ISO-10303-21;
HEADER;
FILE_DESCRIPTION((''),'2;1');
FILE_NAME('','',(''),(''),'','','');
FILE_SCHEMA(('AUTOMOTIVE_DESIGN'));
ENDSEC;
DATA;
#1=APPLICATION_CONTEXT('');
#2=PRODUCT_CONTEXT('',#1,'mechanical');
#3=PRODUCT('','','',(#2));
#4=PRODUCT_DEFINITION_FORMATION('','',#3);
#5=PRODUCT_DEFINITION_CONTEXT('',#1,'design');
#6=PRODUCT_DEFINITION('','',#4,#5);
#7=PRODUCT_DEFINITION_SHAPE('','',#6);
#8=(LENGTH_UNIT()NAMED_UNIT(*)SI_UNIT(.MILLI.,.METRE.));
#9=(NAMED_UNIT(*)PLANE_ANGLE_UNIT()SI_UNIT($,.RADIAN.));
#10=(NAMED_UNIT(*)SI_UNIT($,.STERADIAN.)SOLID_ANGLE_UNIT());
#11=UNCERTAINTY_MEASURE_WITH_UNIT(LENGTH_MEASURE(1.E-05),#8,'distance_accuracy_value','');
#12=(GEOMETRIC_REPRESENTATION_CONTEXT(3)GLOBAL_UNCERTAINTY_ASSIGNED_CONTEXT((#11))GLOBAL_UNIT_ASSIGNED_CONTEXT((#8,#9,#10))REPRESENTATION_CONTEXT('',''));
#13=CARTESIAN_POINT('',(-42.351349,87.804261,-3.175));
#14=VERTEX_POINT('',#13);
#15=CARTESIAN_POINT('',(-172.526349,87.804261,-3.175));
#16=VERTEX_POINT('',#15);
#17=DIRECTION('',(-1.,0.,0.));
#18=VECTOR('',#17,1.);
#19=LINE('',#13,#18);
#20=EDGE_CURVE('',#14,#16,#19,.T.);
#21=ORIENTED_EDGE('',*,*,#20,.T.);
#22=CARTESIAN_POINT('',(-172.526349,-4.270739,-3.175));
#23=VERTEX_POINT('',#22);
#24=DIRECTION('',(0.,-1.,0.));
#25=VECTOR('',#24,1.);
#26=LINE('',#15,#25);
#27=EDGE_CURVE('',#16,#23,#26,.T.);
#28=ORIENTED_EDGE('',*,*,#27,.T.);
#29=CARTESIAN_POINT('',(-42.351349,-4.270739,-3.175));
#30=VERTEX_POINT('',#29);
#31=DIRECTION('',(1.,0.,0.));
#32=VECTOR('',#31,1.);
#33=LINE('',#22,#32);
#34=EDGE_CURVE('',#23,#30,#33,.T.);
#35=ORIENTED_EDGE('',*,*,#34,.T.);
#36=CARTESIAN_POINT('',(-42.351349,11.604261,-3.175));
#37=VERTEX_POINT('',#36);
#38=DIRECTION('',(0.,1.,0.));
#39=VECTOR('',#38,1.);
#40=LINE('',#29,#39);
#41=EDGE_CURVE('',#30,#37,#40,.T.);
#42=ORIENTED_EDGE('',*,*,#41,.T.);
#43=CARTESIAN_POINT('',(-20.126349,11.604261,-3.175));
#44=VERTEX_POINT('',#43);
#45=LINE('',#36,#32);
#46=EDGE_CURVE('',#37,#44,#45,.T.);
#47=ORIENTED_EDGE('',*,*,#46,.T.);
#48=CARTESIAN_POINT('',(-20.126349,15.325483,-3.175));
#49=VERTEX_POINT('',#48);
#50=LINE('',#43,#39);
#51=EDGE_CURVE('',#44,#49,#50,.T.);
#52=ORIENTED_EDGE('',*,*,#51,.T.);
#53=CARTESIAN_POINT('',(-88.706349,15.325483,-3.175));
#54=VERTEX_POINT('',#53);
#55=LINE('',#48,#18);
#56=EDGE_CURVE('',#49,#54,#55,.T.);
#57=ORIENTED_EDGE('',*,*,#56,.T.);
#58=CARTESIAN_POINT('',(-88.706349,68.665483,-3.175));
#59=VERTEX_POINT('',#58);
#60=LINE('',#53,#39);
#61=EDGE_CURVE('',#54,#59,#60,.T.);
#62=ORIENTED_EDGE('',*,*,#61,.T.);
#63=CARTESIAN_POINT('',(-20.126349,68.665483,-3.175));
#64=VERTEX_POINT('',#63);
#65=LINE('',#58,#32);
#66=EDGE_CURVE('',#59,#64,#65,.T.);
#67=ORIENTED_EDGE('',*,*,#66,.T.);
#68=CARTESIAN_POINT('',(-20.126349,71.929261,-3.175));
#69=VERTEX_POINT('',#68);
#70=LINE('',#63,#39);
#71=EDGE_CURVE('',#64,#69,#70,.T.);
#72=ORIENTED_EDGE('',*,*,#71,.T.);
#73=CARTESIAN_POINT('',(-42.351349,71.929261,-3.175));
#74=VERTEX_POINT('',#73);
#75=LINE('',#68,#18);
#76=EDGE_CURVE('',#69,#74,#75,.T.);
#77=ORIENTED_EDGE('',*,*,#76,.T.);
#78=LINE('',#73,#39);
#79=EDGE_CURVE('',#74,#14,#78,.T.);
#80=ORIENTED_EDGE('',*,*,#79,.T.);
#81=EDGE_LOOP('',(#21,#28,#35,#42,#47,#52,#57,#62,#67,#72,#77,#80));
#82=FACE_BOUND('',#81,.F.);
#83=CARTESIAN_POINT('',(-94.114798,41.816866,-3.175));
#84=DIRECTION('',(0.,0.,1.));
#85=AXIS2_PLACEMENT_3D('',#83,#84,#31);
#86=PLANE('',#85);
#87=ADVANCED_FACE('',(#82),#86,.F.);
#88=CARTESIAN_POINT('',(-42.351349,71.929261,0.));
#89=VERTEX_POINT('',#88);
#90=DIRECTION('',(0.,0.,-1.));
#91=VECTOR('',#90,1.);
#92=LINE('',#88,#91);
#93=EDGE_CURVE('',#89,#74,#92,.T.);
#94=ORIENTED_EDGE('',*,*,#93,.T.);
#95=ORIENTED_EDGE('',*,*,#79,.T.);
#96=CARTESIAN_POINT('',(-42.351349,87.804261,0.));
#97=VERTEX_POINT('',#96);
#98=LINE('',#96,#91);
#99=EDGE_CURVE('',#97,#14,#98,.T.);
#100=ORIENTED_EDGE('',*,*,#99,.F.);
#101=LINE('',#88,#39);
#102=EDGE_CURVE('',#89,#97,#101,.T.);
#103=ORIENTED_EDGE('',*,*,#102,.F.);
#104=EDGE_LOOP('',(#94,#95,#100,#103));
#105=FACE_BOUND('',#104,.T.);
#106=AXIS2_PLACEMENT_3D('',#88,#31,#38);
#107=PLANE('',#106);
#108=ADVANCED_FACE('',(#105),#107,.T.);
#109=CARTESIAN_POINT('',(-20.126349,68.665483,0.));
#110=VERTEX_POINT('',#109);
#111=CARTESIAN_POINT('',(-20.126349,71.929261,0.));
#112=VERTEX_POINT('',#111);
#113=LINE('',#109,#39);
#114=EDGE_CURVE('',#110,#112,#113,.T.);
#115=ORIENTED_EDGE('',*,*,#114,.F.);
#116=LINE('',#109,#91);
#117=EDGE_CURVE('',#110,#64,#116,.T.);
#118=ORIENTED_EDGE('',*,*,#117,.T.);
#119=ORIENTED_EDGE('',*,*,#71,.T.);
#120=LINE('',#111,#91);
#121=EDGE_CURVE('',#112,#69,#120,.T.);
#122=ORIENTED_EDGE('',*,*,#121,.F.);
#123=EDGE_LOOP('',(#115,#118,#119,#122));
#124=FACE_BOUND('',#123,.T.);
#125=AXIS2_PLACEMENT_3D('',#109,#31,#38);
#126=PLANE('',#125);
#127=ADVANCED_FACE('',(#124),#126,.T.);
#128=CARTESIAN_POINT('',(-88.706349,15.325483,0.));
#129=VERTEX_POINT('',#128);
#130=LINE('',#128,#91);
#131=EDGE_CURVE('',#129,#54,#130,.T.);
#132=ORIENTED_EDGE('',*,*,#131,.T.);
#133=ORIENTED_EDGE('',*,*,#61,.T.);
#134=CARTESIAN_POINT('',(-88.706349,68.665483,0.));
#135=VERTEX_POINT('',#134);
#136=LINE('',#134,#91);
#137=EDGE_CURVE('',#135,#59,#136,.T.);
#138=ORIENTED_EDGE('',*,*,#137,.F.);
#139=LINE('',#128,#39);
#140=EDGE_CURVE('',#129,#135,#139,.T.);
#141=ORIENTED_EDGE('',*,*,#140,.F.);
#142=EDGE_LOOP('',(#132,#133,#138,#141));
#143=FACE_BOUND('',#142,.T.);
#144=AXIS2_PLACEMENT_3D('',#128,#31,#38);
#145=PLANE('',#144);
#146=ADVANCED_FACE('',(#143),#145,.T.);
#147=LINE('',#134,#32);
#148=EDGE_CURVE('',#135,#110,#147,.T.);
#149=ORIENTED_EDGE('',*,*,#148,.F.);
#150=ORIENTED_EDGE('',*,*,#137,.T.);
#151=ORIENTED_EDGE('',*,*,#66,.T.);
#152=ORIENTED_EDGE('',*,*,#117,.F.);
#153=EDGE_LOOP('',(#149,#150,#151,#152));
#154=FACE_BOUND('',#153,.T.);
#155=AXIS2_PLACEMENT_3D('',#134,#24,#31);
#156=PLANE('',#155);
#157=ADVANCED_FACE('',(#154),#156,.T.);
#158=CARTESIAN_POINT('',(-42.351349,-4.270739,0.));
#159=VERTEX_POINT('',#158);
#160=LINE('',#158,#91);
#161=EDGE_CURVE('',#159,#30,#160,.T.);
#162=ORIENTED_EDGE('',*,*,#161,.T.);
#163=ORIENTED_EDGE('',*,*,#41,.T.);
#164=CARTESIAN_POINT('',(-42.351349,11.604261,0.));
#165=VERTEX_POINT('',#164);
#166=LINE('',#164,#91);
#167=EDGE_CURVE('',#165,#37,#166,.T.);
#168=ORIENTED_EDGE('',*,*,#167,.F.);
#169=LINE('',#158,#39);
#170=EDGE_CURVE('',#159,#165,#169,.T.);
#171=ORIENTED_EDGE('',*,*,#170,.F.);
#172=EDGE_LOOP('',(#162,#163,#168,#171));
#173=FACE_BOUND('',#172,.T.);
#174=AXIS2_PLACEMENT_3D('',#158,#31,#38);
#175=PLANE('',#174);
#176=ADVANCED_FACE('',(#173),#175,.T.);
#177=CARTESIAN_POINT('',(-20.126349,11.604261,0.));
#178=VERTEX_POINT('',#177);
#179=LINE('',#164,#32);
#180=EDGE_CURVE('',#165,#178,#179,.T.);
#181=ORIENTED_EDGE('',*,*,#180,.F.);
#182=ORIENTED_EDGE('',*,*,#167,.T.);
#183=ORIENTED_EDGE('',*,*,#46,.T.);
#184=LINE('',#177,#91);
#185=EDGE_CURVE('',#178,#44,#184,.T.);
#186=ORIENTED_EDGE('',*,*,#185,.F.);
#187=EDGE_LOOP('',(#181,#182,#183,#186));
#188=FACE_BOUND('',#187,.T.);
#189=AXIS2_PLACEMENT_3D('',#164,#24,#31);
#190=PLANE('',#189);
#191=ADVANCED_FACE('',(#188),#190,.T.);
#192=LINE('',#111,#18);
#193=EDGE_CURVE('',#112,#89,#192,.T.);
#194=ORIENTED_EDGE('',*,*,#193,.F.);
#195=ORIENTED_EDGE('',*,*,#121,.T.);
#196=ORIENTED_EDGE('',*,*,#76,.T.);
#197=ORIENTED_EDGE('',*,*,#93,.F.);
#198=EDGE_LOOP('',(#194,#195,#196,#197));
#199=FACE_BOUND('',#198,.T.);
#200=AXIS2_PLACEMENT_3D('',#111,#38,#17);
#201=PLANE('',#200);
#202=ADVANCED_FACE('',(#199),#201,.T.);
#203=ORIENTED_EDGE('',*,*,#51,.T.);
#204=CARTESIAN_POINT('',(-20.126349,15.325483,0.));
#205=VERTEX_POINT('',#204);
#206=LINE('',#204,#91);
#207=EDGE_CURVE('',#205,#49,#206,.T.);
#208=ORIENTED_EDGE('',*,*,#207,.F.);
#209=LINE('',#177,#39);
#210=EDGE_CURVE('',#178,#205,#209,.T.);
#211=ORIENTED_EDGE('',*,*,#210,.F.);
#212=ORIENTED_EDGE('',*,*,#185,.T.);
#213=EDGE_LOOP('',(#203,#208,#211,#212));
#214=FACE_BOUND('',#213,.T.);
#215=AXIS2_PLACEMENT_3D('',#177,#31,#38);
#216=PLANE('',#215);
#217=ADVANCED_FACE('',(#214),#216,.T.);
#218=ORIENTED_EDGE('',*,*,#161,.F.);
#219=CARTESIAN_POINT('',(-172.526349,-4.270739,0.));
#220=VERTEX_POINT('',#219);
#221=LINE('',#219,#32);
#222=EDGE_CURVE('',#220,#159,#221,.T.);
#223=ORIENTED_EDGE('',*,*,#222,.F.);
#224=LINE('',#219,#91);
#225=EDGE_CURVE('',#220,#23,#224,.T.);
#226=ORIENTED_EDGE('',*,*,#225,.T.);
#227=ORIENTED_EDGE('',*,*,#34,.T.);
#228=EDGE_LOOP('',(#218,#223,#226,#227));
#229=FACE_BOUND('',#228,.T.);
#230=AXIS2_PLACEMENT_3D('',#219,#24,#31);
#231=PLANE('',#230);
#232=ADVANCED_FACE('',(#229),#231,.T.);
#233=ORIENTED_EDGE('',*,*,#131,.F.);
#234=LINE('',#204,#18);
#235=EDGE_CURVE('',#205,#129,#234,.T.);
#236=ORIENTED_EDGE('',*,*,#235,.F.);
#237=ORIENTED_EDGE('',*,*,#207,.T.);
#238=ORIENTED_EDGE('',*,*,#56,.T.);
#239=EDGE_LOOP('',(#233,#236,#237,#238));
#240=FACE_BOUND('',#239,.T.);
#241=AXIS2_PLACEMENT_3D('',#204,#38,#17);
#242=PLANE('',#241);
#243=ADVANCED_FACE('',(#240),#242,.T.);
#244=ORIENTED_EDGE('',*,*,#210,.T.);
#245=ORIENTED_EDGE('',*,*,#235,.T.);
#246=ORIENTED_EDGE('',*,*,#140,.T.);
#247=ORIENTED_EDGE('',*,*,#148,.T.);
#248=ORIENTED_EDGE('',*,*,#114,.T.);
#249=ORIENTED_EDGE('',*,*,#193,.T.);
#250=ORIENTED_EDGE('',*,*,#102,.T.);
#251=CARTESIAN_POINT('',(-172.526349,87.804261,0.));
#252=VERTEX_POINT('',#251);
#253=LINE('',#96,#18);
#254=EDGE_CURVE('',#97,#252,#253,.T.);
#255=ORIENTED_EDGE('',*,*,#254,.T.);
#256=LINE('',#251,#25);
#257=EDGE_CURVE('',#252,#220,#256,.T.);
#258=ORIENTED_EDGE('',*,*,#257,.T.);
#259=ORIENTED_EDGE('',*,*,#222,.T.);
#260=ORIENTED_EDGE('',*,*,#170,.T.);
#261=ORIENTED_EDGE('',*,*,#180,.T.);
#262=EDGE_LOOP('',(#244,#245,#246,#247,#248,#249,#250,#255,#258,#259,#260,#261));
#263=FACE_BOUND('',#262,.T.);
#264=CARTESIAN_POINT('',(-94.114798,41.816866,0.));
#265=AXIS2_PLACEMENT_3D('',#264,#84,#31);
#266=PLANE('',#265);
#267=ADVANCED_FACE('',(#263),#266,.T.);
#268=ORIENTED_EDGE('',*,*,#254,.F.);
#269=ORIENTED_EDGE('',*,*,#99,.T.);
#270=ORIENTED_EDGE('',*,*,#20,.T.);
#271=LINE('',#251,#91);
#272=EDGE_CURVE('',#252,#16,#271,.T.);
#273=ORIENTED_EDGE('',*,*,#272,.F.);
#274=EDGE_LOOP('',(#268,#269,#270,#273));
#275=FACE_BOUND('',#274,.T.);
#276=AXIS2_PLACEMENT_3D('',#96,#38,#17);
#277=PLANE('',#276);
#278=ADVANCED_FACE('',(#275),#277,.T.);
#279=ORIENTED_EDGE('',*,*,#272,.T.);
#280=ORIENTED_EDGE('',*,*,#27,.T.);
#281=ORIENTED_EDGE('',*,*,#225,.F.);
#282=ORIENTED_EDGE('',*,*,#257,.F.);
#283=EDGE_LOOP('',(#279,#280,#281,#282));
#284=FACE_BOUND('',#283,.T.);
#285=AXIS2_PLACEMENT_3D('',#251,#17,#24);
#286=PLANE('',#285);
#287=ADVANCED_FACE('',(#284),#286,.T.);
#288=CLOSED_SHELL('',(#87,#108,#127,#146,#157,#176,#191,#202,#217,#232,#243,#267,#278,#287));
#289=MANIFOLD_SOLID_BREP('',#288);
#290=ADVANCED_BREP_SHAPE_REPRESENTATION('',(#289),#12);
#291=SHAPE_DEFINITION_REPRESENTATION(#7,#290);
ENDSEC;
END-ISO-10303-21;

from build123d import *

# Parameters (mm, degrees)
F1_DEPTH = 3.175


# Not quite as in the source:
# - a length typed as a fraction of an inch, garbled in the dataset ("3 / 203.2 mm" for 3/8 in), is restored


with BuildPart() as f1:
    # F0 (on Top) → F1 (new body)
    with BuildSketch(Plane.XY):
        Polygon((-42.3513493031, 87.8042607932), (-172.5263493031, 87.8042607932), (-172.5263493031, -4.2707392068), (-42.3513493031, -4.2707392068), (-42.3513493031, 11.6042607932), (-20.1263493031, 11.6042607932), (-20.1263493031, 15.3254829347), (-88.7063493031, 15.3254829347), (-88.7063493031, 68.6654829347), (-20.1263493031, 68.6654829347), (-20.1263493031, 71.9292607932), (-42.3513493031, 71.9292607932), align=None)
    extrude(amount=-F1_DEPTH)


solid = f1.part
